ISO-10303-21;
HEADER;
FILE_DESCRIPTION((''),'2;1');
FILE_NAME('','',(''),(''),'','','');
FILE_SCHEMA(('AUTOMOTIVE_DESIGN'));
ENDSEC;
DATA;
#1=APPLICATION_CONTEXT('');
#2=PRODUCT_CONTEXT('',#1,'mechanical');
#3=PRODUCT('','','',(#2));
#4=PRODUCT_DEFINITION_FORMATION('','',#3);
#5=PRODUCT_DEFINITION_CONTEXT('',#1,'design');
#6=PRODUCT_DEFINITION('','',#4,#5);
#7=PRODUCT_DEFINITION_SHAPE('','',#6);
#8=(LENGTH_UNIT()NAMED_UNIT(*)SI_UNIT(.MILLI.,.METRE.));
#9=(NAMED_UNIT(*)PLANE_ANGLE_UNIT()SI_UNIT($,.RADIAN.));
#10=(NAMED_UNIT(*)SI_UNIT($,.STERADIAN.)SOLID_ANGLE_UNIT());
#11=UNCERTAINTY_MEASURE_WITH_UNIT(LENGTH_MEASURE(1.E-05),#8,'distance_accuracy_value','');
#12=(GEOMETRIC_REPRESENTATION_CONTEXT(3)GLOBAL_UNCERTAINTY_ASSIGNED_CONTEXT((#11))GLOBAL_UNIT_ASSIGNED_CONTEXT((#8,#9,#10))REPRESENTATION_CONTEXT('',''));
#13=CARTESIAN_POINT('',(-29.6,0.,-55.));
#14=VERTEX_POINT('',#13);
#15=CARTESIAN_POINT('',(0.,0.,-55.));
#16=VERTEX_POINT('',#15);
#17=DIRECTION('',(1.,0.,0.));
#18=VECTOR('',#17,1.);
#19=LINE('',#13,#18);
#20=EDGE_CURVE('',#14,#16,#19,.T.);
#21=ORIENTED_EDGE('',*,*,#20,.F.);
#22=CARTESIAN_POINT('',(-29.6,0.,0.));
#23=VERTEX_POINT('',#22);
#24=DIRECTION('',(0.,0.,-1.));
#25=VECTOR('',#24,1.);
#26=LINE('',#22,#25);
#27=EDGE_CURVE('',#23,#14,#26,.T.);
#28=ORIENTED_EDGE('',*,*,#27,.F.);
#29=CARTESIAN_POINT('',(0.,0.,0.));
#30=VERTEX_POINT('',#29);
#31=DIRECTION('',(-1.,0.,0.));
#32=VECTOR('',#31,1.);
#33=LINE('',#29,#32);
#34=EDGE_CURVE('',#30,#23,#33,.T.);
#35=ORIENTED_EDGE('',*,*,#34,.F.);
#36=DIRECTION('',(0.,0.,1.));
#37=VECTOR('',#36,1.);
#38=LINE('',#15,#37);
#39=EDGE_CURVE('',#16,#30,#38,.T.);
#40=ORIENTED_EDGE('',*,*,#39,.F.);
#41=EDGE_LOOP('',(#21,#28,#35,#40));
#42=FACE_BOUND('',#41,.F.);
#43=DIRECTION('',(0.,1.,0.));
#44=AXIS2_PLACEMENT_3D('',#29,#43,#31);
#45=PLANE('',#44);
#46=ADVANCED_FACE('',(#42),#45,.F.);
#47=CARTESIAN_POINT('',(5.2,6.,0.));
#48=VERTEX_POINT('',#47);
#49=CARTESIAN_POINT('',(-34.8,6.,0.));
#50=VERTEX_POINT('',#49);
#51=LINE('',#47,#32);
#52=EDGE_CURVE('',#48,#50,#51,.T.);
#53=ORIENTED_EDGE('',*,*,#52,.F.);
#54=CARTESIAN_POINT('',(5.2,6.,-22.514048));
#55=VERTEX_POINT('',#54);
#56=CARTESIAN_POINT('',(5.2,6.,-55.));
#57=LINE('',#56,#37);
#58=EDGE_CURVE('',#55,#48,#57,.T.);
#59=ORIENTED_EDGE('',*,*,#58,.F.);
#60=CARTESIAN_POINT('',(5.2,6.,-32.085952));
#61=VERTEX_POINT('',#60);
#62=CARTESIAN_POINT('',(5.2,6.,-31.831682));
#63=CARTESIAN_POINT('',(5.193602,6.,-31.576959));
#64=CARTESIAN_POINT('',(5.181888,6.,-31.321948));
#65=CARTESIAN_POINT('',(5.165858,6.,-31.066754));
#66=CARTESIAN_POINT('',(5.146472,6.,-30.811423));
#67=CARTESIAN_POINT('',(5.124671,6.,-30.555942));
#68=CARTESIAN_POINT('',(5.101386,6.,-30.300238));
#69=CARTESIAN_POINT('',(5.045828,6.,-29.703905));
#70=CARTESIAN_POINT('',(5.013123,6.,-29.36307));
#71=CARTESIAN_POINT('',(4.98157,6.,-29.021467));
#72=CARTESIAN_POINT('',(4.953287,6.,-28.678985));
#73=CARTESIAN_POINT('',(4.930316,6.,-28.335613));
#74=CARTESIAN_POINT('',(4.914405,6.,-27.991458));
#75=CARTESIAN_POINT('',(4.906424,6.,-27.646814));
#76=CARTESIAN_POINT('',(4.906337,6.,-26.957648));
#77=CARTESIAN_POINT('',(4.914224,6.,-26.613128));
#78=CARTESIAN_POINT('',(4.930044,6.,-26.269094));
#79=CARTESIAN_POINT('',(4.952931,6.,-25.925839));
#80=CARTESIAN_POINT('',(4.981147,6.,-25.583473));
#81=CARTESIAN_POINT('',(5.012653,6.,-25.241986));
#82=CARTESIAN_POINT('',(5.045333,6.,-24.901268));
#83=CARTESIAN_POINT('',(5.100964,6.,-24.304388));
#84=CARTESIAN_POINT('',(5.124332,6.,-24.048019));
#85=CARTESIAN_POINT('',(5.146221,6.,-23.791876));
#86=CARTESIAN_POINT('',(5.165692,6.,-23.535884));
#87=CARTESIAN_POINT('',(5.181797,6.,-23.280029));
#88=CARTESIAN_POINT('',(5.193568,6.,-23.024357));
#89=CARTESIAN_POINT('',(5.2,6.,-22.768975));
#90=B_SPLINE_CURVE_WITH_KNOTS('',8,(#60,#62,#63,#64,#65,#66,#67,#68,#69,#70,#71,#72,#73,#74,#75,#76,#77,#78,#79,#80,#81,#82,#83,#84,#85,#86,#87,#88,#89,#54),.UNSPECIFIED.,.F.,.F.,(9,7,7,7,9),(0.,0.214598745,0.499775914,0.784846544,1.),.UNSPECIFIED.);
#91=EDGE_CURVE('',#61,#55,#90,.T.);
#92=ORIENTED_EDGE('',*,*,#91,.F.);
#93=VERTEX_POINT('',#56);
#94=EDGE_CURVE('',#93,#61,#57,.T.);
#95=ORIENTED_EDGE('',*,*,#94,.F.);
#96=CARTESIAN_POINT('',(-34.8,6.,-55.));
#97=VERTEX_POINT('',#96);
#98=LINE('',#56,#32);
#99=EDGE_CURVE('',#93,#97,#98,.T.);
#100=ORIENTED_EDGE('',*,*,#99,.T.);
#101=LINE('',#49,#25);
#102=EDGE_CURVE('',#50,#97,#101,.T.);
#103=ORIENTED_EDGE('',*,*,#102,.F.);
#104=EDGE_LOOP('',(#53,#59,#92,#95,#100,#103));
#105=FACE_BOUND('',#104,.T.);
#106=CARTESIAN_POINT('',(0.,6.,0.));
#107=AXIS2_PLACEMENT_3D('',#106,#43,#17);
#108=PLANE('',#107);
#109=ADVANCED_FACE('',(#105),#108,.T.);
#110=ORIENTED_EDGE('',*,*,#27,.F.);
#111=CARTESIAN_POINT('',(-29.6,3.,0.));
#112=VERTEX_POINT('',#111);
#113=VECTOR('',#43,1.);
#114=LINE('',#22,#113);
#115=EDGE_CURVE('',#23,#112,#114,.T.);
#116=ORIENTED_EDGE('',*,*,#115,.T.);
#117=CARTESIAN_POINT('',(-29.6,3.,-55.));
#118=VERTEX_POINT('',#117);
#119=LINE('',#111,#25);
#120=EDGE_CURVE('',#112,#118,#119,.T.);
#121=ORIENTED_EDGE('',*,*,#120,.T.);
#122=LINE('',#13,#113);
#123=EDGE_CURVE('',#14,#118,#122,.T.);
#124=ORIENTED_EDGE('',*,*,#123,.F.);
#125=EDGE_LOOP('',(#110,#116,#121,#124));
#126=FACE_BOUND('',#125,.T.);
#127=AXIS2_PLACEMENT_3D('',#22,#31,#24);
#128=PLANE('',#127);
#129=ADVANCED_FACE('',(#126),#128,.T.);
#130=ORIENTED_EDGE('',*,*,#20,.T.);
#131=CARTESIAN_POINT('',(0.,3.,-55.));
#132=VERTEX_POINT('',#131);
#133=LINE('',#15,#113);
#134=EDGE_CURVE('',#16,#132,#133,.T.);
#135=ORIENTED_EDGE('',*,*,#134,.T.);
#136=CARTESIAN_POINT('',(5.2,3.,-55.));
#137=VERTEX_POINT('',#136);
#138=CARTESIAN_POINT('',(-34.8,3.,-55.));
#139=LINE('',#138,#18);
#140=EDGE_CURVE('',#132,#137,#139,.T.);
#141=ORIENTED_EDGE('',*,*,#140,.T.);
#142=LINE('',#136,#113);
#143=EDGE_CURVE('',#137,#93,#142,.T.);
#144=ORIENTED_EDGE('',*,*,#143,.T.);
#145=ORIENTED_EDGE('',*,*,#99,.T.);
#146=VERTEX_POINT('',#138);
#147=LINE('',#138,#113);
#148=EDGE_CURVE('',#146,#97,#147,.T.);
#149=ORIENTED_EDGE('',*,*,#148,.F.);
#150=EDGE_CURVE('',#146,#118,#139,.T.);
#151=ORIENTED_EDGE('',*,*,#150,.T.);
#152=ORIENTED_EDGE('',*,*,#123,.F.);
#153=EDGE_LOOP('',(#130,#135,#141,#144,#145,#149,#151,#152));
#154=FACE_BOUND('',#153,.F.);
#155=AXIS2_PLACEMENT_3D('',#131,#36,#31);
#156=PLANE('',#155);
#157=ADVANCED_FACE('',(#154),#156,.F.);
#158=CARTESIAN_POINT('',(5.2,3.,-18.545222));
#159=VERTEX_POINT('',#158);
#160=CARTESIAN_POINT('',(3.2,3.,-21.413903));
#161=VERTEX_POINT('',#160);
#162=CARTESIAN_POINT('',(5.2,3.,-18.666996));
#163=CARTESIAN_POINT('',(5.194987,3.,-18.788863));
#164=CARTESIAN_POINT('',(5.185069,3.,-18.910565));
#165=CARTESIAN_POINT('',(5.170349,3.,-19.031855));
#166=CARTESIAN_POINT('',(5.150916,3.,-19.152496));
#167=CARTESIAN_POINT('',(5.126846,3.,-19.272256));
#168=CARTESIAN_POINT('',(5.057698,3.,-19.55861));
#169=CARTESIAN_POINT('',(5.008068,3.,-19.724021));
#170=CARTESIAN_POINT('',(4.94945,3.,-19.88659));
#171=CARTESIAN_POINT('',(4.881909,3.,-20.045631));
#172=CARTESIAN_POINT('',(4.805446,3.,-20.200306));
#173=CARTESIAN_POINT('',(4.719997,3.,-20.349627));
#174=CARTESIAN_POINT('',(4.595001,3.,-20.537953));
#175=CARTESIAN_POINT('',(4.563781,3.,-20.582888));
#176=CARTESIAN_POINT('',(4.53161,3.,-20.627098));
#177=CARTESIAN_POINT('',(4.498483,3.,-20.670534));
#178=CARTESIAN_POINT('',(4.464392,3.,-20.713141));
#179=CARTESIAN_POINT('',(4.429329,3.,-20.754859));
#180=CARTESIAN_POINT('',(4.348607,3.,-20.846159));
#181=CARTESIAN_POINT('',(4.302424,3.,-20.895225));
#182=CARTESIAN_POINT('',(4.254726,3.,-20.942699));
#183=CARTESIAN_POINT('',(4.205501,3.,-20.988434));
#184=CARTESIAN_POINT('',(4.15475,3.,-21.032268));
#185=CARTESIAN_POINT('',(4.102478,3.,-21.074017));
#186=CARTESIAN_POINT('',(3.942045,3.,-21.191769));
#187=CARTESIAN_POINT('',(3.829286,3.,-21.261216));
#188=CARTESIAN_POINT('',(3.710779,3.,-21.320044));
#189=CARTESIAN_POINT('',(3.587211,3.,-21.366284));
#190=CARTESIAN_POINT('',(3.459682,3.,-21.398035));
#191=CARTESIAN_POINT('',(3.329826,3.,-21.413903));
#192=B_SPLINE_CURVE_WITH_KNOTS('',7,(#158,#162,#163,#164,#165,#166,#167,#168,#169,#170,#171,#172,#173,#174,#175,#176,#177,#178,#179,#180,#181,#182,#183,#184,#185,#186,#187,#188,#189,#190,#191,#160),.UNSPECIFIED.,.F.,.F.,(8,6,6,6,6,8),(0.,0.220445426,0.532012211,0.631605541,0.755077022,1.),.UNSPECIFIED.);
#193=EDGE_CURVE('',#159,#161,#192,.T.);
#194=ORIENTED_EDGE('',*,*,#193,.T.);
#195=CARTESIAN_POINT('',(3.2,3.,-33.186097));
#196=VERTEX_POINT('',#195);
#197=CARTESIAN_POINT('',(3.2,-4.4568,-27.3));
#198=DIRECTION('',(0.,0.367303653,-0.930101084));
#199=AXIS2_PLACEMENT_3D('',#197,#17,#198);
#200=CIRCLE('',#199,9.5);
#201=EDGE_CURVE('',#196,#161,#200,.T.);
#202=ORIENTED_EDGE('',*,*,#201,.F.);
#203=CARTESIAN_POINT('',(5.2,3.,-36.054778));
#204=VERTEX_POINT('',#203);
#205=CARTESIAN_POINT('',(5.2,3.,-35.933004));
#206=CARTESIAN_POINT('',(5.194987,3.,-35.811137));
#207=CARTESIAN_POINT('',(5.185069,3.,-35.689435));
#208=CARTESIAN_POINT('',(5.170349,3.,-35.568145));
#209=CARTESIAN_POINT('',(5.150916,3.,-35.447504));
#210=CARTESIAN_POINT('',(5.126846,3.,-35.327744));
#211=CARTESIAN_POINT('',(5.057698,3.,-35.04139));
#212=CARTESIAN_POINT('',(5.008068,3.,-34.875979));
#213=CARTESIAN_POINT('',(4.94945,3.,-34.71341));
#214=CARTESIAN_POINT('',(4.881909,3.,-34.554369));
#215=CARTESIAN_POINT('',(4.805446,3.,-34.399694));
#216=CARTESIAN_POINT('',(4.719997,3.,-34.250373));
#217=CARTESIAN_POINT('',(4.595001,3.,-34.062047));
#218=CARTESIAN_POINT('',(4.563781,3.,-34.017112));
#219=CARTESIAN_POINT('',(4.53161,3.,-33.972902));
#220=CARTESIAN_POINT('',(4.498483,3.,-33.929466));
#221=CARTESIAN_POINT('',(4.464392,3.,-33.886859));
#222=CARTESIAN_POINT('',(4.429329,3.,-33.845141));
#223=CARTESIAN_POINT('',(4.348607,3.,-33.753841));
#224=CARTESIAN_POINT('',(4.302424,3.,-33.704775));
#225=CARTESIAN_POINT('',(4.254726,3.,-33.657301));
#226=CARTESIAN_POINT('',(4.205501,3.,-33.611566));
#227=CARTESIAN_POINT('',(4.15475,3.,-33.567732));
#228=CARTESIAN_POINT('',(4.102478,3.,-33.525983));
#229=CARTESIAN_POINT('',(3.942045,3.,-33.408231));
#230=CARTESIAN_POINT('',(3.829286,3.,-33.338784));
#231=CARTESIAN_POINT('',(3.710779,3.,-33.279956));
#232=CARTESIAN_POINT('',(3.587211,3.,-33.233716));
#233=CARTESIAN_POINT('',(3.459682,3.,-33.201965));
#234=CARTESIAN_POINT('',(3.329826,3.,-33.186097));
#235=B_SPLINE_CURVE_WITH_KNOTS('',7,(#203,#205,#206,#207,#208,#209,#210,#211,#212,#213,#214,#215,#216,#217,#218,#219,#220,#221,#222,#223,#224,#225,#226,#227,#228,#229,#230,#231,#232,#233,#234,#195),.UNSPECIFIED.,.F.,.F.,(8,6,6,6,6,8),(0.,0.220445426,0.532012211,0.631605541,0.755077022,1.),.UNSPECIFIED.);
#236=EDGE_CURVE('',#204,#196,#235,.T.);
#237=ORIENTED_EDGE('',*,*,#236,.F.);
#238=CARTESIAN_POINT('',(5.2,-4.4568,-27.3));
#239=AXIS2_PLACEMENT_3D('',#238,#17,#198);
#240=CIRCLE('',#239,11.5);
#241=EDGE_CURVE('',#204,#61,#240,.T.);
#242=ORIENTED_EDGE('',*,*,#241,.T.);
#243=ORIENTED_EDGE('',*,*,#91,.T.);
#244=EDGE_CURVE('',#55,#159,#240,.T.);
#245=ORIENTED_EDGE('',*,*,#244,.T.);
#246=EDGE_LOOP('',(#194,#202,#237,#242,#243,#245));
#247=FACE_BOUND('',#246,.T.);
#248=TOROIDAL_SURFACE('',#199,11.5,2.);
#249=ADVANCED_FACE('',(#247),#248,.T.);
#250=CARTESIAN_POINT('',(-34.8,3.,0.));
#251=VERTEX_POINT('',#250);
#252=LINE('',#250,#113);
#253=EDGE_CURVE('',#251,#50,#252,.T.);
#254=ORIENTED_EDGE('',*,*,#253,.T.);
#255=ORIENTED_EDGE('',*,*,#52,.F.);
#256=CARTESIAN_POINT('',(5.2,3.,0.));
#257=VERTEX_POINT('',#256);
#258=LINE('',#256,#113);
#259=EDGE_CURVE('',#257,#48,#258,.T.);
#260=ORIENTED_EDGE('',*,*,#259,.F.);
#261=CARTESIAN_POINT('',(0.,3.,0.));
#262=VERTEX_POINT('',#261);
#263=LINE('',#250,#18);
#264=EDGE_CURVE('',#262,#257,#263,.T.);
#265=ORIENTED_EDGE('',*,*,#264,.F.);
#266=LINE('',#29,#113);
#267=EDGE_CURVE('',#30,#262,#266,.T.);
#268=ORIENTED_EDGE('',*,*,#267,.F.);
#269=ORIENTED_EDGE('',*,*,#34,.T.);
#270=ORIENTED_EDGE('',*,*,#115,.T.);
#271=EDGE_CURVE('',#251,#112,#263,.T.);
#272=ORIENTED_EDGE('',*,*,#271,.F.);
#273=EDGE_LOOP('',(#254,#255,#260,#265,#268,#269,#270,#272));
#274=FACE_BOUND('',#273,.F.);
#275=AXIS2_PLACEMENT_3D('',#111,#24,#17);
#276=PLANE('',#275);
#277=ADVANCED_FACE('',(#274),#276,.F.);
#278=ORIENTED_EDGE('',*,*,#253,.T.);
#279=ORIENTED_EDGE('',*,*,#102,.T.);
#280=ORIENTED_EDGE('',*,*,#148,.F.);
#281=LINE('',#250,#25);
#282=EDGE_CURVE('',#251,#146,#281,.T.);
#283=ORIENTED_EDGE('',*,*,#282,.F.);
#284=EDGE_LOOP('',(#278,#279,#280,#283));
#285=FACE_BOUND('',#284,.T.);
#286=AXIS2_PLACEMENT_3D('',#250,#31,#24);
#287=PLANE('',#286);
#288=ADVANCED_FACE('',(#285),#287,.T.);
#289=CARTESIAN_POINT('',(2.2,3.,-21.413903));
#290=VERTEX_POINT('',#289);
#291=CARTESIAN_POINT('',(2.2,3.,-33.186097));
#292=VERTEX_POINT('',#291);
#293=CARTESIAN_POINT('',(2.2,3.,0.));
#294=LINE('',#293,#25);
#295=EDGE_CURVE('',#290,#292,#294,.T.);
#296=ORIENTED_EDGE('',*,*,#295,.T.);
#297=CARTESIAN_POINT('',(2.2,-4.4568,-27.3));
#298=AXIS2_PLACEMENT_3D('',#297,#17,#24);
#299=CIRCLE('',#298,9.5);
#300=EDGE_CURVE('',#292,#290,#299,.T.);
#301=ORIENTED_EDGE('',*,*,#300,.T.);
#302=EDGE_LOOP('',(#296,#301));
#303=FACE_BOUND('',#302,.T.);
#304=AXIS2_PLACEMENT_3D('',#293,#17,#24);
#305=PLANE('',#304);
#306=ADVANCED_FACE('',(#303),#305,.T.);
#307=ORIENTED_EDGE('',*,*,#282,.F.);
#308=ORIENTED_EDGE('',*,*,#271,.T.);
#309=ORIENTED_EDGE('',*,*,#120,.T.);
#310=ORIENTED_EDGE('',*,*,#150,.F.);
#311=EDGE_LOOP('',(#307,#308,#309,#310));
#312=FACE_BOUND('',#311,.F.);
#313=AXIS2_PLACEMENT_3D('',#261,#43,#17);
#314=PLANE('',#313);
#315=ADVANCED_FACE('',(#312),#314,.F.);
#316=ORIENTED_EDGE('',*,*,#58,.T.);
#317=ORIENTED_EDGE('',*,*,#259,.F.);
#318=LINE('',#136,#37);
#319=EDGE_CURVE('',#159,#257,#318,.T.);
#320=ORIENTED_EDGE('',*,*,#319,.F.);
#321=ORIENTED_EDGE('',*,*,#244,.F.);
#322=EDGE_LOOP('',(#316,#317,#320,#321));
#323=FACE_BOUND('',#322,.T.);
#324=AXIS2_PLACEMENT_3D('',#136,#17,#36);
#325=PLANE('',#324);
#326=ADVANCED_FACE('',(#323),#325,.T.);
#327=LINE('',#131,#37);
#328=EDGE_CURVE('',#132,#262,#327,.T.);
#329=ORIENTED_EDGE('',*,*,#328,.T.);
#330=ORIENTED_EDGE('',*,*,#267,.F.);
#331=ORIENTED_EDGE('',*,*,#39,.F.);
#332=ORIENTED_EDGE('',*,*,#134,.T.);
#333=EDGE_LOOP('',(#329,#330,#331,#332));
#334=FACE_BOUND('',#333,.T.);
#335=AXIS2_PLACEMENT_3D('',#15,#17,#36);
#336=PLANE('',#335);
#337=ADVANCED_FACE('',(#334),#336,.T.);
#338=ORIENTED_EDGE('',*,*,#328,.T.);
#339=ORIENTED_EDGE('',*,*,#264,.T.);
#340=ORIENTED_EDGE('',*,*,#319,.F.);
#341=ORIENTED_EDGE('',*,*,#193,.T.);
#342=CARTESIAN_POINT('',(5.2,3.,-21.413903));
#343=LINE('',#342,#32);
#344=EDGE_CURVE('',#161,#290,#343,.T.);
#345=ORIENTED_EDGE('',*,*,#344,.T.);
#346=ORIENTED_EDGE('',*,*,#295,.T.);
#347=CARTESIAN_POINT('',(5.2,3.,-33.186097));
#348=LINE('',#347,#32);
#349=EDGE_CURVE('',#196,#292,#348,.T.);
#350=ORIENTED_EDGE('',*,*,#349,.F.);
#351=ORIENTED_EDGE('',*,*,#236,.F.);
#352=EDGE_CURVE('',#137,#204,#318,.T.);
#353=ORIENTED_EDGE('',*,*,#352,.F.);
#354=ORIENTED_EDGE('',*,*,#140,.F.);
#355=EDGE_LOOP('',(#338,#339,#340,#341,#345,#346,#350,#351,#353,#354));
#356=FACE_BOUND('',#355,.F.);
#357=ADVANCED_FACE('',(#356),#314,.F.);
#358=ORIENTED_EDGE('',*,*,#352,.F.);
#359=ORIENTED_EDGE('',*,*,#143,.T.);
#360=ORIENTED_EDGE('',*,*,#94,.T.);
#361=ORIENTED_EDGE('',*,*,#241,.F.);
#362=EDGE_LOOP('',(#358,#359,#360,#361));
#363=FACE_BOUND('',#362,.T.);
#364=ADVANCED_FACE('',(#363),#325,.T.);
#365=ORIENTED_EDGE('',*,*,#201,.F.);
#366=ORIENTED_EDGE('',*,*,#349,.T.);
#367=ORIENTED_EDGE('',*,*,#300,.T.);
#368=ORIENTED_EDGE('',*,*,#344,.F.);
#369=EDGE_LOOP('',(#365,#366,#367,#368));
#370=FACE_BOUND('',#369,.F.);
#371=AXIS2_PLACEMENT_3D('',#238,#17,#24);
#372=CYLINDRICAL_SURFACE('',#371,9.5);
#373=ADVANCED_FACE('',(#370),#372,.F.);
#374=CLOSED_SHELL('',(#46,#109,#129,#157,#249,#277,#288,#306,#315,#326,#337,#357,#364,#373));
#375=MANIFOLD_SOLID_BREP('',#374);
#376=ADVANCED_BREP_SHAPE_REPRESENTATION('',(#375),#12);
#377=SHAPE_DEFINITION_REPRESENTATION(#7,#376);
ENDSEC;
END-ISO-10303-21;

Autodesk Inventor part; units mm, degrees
ref_plane "YZ Plane" through (0, 0, 0) normal (1, 0, 0) x (0, 1, 0)
ref_plane "XZ Plane" through (0, 0, 0) normal (0, 1, 0) x (-1, 0, 0)
ref_plane "XY Plane" through (0, 0, 0) normal (0, 0, 1) x (1, 0, 0)
sketch "스케치1" plane through (0, 0, 0) normal (0, 1, 0) x (-1, 0, 0)
  line L0 (0, 0) -> (29.6, 0)
  line L1 (29.6, 0) -> (29.6, -55)
  line L2 (29.6, -55) -> (0, -55)
  line L3 (0, -55) -> (0, 0)
  dimension "d0" = 29.6
  dimension "d1" = 55
extrude "돌출1" add sketch "스케치1" along normal blind 3
sketch "스케치2" plane through (0, 3, 0) normal (0, 1, 0) x (1, 0, 0)
  line L0 (0, 55) -> (-29.6, 55) projected
  line L1 (-29.6, 55) -> (-29.6, 0) projected
  line L2 (-29.6, 0) -> (0, 0) projected
  line L3 (0, 0) -> (0, 55) projected
  line L4 (5.2, 0) -> (-34.8, 0)
  line L5 (-34.8, 0) -> (-34.8, 55)
  line L6 (-34.8, 55) -> (5.2, 55)
  line L7 (5.2, 55) -> (5.2, 0)
  line L8 (0, 55) -> (-29.6, 55) projected
  point P0 (-14.8, 0)
  point P1 (0, 55)
  point P2 (-29.6, 55)
  dimension "d4" = 40
  dimension "d5" = 20
extrude "돌출2" add sketch "스케치2" along normal blind 3
sketch "스케치3" plane through (5.2, 3, 0) normal (1, 0, 0) x (0, 0, -1)
  line L0 (0, 0) -> (55, 0) projected
  line L1 (55, 0) -> (55, 3) projected
  line L2 (0, 3) -> (55, 3) projected
  line L3 (0, 0) -> (0, 3) projected
  circle A0 centre (27.3, -7.4568) radius 9.5
  point P0 (0, -3)
  point P1 (33.1861, 0)
  point P2 (21.4139, 0)
  dimension "d8" = 19
extrude "돌출3" cut sketch "스케치3" against normal blind 3 contours A0 L0 picked at (27.9995, 0.6028)
fillet "모깎기1" radius 2 1 edges at (5.2, 5.0432, -27.3)
properties part number "motor cover1"
